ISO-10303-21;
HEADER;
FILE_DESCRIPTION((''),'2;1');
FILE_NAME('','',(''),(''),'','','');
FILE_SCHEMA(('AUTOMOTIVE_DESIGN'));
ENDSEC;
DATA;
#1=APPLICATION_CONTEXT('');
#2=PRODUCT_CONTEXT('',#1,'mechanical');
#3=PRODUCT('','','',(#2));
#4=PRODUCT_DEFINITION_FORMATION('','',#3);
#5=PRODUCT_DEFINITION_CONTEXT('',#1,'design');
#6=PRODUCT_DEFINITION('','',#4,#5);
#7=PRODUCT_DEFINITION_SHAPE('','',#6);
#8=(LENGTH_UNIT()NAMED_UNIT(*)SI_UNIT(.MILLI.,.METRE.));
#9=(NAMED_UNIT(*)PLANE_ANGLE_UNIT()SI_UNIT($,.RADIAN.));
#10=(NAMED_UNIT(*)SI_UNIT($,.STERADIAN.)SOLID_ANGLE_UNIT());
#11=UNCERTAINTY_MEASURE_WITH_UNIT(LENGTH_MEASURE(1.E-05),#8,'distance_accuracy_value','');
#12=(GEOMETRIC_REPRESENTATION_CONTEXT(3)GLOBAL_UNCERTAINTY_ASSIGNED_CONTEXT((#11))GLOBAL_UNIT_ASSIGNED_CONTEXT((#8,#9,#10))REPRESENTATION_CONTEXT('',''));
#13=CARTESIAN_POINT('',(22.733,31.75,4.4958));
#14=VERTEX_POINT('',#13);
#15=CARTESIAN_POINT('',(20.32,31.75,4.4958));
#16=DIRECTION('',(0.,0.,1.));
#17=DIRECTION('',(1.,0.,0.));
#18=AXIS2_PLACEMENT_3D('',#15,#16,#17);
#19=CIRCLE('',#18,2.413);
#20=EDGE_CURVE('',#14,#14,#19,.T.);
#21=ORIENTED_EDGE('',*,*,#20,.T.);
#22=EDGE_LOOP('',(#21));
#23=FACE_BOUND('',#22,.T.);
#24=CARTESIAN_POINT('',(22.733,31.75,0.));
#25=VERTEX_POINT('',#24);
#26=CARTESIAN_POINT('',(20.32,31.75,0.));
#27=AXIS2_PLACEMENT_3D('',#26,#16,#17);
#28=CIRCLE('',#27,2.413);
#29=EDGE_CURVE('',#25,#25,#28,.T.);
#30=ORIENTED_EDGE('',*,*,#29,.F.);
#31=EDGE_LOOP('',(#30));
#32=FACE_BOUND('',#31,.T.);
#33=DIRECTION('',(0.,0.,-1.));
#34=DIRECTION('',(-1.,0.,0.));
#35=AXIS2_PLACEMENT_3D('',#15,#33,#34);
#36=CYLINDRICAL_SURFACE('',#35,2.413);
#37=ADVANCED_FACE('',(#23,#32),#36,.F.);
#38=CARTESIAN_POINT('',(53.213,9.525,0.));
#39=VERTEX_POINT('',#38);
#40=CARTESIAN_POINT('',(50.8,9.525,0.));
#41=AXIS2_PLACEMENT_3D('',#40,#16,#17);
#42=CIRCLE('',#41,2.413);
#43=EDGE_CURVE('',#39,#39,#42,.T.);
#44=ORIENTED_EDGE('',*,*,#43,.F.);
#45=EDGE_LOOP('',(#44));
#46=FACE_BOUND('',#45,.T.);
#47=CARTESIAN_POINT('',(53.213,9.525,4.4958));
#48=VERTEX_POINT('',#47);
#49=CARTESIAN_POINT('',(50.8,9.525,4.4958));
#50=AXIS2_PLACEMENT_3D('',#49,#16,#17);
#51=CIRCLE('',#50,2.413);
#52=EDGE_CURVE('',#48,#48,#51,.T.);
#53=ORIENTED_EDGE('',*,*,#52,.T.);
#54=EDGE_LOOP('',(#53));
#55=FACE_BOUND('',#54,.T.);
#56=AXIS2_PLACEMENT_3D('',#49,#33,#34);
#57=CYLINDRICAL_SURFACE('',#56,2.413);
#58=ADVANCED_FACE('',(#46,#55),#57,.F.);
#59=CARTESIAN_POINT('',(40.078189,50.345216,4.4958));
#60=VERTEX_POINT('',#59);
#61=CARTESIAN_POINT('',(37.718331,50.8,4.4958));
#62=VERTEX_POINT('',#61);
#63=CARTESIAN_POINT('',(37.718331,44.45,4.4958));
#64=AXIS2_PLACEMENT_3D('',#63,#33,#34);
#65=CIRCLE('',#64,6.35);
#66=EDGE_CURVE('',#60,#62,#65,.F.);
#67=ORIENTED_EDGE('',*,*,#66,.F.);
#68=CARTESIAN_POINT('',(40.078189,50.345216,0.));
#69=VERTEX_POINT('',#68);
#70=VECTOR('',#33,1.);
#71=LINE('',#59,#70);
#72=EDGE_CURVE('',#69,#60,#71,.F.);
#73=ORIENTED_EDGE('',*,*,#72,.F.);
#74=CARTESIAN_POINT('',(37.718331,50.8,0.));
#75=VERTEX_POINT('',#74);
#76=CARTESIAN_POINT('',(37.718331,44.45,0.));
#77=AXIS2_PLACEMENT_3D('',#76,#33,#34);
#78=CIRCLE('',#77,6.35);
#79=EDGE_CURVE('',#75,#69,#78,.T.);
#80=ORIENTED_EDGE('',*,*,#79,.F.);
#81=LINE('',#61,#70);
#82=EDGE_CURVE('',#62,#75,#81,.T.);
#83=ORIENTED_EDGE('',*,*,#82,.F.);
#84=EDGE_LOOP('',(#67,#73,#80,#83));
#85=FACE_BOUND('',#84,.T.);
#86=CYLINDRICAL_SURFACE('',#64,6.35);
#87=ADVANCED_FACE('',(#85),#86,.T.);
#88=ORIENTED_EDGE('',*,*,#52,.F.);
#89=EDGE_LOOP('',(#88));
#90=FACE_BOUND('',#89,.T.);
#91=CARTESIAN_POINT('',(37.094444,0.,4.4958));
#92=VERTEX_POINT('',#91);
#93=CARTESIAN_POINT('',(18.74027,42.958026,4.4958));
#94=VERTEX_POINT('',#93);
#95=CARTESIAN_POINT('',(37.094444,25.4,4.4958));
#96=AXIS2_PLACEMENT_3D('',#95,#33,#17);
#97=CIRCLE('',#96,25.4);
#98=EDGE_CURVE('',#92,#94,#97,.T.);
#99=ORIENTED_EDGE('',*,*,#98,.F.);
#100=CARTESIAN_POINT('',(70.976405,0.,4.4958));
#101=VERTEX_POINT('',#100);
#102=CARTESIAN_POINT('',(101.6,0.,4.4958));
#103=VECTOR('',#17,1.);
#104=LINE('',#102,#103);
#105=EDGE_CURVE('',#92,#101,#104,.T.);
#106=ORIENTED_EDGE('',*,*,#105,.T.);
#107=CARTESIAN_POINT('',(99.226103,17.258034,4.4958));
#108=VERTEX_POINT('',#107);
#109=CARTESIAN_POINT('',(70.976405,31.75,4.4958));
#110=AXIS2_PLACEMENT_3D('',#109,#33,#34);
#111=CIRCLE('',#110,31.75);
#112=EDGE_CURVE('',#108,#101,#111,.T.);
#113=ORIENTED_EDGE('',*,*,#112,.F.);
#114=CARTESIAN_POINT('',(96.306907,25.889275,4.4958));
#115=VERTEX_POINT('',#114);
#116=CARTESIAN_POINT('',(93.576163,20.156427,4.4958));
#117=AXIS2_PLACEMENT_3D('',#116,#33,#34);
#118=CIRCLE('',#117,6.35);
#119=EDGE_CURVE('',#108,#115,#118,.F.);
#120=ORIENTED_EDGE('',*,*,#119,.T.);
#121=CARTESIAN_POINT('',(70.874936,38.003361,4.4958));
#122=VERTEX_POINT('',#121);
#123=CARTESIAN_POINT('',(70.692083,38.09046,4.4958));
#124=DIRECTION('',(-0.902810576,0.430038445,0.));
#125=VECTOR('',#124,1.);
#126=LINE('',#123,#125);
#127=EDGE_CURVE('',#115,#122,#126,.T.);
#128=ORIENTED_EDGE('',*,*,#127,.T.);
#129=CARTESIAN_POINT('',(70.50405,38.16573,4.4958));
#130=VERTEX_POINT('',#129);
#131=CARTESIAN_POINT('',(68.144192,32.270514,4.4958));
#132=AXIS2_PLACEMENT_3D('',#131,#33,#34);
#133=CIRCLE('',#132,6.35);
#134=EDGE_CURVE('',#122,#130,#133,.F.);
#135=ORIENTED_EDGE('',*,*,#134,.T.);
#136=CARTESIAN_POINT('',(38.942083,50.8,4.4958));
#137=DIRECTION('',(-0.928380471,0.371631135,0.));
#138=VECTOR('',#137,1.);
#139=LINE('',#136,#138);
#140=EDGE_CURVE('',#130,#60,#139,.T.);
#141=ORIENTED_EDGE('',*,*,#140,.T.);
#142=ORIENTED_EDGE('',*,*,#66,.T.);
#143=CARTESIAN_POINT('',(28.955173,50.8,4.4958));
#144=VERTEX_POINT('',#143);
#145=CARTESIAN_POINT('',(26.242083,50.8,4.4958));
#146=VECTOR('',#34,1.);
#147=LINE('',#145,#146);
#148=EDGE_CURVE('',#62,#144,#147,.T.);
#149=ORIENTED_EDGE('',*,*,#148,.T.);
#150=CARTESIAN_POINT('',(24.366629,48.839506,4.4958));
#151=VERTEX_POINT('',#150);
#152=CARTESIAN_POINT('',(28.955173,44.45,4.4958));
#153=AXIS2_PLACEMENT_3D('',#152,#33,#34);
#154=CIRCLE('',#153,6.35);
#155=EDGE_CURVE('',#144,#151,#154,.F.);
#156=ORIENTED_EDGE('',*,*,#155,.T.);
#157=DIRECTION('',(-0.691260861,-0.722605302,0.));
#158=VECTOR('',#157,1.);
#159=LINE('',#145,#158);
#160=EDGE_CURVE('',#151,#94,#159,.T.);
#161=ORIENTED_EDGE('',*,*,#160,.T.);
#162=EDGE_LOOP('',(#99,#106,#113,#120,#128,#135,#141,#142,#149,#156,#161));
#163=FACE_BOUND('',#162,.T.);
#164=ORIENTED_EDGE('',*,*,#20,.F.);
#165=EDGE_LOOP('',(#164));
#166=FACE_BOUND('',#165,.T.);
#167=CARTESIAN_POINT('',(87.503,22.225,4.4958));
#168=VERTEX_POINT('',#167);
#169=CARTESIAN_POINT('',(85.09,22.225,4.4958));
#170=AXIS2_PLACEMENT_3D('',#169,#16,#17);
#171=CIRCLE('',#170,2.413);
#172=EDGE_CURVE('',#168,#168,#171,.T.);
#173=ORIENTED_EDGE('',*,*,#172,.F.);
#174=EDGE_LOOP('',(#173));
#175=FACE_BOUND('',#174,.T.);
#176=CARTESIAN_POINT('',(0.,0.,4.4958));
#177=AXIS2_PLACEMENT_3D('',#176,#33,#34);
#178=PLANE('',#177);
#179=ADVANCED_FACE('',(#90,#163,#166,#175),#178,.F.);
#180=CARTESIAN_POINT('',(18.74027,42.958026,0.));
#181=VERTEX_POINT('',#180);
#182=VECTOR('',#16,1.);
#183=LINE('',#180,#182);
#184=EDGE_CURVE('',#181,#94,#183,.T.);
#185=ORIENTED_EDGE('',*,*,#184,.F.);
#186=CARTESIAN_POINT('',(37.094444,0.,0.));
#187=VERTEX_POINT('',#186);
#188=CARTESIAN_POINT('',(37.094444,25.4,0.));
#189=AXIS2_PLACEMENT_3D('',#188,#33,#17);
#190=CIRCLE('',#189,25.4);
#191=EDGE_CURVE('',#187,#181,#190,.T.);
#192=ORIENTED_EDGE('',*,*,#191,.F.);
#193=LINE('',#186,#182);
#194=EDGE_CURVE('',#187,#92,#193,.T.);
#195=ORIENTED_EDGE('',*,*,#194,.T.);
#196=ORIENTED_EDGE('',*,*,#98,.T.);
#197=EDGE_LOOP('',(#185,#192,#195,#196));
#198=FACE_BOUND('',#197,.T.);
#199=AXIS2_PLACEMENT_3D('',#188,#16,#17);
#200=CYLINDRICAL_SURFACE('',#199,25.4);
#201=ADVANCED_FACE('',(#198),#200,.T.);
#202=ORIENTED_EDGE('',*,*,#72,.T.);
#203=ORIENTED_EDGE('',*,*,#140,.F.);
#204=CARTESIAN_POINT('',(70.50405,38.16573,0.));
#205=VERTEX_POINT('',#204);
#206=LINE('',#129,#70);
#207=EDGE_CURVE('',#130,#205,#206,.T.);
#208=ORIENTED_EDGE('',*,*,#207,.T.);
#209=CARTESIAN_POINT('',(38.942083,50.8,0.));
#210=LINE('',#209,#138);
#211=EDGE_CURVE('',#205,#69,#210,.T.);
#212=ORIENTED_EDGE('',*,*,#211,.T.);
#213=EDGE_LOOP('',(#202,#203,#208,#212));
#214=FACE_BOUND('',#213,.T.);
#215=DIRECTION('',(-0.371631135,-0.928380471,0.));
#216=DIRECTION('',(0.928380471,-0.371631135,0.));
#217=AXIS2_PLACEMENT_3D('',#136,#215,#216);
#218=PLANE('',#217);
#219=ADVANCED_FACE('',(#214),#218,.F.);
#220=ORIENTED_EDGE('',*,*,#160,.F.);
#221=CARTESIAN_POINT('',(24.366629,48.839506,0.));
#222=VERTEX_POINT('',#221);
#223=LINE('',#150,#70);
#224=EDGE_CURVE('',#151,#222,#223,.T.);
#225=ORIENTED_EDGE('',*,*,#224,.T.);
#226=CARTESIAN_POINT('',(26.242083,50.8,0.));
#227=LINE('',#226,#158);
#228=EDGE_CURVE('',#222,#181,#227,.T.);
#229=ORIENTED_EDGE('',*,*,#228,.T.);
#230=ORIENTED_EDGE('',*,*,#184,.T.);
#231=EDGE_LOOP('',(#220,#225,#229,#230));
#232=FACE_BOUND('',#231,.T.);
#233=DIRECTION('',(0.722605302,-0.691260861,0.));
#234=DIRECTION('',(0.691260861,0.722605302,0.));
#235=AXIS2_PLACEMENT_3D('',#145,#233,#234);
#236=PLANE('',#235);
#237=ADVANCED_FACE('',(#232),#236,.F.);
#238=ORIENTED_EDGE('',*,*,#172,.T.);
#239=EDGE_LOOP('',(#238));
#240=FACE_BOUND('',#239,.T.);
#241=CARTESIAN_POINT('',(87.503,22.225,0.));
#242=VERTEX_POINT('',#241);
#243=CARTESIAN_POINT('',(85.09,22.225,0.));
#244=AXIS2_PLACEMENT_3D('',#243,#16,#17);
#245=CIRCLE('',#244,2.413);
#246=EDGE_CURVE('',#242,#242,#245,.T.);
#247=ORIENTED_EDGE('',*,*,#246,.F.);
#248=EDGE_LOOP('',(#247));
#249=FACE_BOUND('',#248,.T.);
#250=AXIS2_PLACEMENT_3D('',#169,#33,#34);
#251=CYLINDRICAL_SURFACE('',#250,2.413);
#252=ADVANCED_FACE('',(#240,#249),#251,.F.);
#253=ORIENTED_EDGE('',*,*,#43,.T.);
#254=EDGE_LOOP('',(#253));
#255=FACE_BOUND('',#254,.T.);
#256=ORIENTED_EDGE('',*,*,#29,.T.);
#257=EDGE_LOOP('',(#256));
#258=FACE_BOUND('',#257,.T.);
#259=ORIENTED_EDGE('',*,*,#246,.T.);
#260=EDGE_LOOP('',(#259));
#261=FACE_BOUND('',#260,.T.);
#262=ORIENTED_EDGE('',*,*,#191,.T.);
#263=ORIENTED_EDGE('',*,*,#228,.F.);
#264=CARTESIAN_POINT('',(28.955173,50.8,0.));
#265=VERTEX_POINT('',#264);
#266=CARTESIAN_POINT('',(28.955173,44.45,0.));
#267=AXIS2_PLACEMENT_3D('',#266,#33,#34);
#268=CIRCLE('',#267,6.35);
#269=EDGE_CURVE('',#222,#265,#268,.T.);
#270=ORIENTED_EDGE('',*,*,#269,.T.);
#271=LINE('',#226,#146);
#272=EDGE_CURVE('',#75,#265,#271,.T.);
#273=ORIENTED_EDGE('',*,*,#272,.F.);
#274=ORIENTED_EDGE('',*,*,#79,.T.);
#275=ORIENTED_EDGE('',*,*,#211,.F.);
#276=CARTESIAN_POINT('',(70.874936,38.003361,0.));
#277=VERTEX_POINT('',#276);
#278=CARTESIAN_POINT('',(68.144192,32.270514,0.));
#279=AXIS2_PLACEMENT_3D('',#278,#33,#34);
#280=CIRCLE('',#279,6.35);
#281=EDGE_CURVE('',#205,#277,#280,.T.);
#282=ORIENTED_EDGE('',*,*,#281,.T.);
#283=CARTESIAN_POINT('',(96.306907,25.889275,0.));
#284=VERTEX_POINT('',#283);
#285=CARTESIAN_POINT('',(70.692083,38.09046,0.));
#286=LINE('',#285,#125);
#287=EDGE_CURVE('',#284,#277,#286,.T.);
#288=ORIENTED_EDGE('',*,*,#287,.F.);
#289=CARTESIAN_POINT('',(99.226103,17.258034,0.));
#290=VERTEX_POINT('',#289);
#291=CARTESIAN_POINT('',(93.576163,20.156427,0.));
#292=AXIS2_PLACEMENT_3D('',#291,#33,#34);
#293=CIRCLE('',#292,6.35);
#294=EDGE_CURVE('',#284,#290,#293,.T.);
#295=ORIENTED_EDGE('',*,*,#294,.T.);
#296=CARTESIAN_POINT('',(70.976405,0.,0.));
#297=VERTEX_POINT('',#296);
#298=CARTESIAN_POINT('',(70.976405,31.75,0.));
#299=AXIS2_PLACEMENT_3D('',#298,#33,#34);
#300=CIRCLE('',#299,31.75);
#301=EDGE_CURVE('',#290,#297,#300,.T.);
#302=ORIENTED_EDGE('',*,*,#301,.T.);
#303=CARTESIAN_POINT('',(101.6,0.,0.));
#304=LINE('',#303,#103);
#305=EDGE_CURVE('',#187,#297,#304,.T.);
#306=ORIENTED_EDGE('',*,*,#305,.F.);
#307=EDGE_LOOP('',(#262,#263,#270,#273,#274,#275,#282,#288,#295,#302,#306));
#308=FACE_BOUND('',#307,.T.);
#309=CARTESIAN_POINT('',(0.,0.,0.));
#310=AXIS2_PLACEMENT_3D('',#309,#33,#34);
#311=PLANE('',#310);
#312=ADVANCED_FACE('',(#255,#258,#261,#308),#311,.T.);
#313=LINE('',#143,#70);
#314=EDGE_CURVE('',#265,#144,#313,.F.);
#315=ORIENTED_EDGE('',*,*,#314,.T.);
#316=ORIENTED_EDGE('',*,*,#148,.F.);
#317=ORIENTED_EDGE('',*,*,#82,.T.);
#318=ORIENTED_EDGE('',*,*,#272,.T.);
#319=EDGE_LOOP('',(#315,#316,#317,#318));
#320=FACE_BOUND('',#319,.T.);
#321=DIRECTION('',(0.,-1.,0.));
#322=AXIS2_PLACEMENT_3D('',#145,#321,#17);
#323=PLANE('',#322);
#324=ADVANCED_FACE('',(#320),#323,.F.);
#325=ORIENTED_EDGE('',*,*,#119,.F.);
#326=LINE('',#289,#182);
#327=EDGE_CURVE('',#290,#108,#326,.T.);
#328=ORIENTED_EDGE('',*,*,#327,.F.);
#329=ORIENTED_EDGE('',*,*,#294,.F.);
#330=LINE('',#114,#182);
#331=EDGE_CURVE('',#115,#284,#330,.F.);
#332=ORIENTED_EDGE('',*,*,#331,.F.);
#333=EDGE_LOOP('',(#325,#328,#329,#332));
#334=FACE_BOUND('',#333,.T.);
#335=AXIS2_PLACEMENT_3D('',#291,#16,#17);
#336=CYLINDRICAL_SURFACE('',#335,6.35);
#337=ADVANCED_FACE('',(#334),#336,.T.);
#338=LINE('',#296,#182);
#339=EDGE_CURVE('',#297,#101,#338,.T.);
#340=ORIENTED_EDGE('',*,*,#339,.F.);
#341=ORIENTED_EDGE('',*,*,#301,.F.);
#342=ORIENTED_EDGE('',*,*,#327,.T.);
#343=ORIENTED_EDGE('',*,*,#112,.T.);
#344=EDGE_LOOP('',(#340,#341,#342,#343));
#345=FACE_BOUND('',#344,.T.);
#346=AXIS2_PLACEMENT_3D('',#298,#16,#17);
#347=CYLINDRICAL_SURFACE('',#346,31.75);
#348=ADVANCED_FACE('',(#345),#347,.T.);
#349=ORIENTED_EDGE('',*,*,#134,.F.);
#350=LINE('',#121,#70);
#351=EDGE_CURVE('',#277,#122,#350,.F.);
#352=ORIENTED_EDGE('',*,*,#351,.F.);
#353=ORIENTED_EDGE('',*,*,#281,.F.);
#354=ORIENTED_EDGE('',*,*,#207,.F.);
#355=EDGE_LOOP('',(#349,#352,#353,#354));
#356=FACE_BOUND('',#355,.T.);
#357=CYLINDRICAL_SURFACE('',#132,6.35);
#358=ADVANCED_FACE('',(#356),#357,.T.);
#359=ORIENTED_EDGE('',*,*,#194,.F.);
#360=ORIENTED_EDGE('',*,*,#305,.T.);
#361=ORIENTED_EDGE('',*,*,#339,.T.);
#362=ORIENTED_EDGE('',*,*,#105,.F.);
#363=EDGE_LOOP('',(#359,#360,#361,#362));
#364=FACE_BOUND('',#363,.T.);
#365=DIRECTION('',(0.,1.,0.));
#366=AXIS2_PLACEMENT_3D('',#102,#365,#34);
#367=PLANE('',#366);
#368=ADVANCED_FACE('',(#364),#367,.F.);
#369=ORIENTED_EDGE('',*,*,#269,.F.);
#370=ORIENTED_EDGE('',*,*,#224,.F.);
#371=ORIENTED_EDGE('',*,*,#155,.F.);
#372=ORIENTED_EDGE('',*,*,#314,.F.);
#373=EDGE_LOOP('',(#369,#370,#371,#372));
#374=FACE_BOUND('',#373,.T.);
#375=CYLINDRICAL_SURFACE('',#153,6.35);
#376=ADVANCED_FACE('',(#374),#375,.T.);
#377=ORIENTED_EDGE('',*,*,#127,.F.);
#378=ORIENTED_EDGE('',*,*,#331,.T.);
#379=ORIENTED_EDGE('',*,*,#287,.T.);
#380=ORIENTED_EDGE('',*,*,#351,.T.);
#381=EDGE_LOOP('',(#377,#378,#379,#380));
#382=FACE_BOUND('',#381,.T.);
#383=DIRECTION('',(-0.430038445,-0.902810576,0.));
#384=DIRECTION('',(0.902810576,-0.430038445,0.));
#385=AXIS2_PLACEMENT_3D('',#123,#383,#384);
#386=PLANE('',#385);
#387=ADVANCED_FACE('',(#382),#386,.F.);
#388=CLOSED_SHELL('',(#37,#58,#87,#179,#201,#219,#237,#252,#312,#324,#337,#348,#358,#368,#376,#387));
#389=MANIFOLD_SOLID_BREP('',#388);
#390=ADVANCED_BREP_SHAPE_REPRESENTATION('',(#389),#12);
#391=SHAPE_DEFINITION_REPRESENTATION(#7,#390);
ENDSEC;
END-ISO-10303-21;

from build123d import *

# Parameters (mm, degrees)
SKETCH1_R          = 2.413
EXTRUDE1_DEPTH     = 4.4958
CUT_EXTRUDE1_DEPTH = 114.681186736
FILLET1_R          = 6.35


with BuildPart() as part:
    # Sketch1 → Extrude1 (new body)
    with BuildSketch(Plane.XY):
        Polygon((26.2420825, 50.8), (0, 23.368), (0, 0), (101.6, 0), (101.6, 23.368), (70.6920825, 38.090460221), (38.9420825, 50.8), align=None)
        with Locations((20.32, 31.75)):
            Circle(SKETCH1_R, mode=Mode.SUBTRACT)
        with Locations((50.8, 9.525)):
            Circle(SKETCH1_R, mode=Mode.SUBTRACT)
        with Locations((85.09, 22.225)):
            Circle(SKETCH1_R, mode=Mode.SUBTRACT)
    extrude(amount=EXTRUDE1_DEPTH)

    # Sketch2 → Cut-Extrude1 (cut, through all)
    with BuildSketch(Plane.XY.offset(4.4958)):
        with BuildLine():
            Line((18.740269579, 42.958025871), (0, 23.368))
            Line((0, 23.368), (0, 0))
            Line((0, 0), (37.094444241, 0))
            ThreePointArc((37.094444241, 0), (13.737070061, 15.420367169), (18.740269579, 42.958025871))
        make_face()
        with BuildLine():
            Line((101.6, 23.368), (101.6, 0))
            Line((101.6, 0), (70.976404914, 0))
            ThreePointArc((70.976404914, 0), (90.236908542, 6.509249219), (101.6, 23.368))
        make_face()
    extrude(amount=-CUT_EXTRUDE1_DEPTH, mode=Mode.SUBTRACT)

    # Fillet1
    # the kernel refuses this fillet: 6.35 mm, written as the material it takes off along each edge
    with BuildSketch(Plane(origin=(26.2420825, 50.8, -6.782726088), x_dir=(-0.6912608610672895, -0.7226053016388058, 0), z_dir=(0, 0, 1))) as fillet1_piece_1:
        with BuildLine():
            CenterArc((FILLET1_R * 0.427258336235, FILLET1_R), FILLET1_R, 223.73, 46.27)
            Line((-FILLET1_R * 0.295346965404, FILLET1_R * 0.308739138933), (0, 0))
            Line((0, 0), (FILLET1_R * 0.427258336235, 0))
        make_face()
    extrude(amount=18.061252175, mode=Mode.SUBTRACT)
    with BuildSketch(Plane(origin=(38.9420825, 50.8, -3.059377728), x_dir=(-1, 0, 0), z_dir=(0, 0, 1))) as fillet1_piece_2:
        with BuildLine():
            CenterArc((FILLET1_R * 0.192716707281, FILLET1_R), FILLET1_R, 248.183751186, 21.816248814)
            Line((-FILLET1_R * 0.178914427547, FILLET1_R * 0.0716195286272), (0, 0))
            Line((0, 0), (FILLET1_R * 0.192716707281, 0))
        make_face()
    extrude(amount=10.614555456, mode=Mode.SUBTRACT)
    with BuildSketch(Plane(origin=(70.6920825, 38.090460221, -0.506345886), x_dir=(-0.9283804713727851, 0.3716311348281322, 0), z_dir=(0, 0, 1))) as fillet1_piece_3:
        with BuildLine():
            CenterArc((FILLET1_R * 0.0318958038441, FILLET1_R), FILLET1_R, 266.346248814, 3.653751186)
            Line((-FILLET1_R * 0.0318309718993, FILLET1_R * 0.00203261673873), (0, 0))
            Line((0, 0), (FILLET1_R * 0.0318958038441, 0))
        make_face()
    extrude(amount=5.508491772, mode=Mode.SUBTRACT)
    with BuildSketch(Plane(origin=(101.6, 23.368, -16.387317761), x_dir=(-0.9028105756982961, 0.43003844526659585, 0), z_dir=(0, 0, 1))) as fillet1_piece_4:
        with BuildLine():
            CenterArc((5.862905037, 6.35), FILLET1_R, 178.312383947, 91.687616053)
            ThreePointArc((-0.484340643, 6.537008757), (-0.411321416, 3.25597162), (0, 0))
            Line((0, 0), (5.862905037, 0))
        make_face()
    extrude(amount=37.270435521, mode=Mode.SUBTRACT)


solid = part.part
